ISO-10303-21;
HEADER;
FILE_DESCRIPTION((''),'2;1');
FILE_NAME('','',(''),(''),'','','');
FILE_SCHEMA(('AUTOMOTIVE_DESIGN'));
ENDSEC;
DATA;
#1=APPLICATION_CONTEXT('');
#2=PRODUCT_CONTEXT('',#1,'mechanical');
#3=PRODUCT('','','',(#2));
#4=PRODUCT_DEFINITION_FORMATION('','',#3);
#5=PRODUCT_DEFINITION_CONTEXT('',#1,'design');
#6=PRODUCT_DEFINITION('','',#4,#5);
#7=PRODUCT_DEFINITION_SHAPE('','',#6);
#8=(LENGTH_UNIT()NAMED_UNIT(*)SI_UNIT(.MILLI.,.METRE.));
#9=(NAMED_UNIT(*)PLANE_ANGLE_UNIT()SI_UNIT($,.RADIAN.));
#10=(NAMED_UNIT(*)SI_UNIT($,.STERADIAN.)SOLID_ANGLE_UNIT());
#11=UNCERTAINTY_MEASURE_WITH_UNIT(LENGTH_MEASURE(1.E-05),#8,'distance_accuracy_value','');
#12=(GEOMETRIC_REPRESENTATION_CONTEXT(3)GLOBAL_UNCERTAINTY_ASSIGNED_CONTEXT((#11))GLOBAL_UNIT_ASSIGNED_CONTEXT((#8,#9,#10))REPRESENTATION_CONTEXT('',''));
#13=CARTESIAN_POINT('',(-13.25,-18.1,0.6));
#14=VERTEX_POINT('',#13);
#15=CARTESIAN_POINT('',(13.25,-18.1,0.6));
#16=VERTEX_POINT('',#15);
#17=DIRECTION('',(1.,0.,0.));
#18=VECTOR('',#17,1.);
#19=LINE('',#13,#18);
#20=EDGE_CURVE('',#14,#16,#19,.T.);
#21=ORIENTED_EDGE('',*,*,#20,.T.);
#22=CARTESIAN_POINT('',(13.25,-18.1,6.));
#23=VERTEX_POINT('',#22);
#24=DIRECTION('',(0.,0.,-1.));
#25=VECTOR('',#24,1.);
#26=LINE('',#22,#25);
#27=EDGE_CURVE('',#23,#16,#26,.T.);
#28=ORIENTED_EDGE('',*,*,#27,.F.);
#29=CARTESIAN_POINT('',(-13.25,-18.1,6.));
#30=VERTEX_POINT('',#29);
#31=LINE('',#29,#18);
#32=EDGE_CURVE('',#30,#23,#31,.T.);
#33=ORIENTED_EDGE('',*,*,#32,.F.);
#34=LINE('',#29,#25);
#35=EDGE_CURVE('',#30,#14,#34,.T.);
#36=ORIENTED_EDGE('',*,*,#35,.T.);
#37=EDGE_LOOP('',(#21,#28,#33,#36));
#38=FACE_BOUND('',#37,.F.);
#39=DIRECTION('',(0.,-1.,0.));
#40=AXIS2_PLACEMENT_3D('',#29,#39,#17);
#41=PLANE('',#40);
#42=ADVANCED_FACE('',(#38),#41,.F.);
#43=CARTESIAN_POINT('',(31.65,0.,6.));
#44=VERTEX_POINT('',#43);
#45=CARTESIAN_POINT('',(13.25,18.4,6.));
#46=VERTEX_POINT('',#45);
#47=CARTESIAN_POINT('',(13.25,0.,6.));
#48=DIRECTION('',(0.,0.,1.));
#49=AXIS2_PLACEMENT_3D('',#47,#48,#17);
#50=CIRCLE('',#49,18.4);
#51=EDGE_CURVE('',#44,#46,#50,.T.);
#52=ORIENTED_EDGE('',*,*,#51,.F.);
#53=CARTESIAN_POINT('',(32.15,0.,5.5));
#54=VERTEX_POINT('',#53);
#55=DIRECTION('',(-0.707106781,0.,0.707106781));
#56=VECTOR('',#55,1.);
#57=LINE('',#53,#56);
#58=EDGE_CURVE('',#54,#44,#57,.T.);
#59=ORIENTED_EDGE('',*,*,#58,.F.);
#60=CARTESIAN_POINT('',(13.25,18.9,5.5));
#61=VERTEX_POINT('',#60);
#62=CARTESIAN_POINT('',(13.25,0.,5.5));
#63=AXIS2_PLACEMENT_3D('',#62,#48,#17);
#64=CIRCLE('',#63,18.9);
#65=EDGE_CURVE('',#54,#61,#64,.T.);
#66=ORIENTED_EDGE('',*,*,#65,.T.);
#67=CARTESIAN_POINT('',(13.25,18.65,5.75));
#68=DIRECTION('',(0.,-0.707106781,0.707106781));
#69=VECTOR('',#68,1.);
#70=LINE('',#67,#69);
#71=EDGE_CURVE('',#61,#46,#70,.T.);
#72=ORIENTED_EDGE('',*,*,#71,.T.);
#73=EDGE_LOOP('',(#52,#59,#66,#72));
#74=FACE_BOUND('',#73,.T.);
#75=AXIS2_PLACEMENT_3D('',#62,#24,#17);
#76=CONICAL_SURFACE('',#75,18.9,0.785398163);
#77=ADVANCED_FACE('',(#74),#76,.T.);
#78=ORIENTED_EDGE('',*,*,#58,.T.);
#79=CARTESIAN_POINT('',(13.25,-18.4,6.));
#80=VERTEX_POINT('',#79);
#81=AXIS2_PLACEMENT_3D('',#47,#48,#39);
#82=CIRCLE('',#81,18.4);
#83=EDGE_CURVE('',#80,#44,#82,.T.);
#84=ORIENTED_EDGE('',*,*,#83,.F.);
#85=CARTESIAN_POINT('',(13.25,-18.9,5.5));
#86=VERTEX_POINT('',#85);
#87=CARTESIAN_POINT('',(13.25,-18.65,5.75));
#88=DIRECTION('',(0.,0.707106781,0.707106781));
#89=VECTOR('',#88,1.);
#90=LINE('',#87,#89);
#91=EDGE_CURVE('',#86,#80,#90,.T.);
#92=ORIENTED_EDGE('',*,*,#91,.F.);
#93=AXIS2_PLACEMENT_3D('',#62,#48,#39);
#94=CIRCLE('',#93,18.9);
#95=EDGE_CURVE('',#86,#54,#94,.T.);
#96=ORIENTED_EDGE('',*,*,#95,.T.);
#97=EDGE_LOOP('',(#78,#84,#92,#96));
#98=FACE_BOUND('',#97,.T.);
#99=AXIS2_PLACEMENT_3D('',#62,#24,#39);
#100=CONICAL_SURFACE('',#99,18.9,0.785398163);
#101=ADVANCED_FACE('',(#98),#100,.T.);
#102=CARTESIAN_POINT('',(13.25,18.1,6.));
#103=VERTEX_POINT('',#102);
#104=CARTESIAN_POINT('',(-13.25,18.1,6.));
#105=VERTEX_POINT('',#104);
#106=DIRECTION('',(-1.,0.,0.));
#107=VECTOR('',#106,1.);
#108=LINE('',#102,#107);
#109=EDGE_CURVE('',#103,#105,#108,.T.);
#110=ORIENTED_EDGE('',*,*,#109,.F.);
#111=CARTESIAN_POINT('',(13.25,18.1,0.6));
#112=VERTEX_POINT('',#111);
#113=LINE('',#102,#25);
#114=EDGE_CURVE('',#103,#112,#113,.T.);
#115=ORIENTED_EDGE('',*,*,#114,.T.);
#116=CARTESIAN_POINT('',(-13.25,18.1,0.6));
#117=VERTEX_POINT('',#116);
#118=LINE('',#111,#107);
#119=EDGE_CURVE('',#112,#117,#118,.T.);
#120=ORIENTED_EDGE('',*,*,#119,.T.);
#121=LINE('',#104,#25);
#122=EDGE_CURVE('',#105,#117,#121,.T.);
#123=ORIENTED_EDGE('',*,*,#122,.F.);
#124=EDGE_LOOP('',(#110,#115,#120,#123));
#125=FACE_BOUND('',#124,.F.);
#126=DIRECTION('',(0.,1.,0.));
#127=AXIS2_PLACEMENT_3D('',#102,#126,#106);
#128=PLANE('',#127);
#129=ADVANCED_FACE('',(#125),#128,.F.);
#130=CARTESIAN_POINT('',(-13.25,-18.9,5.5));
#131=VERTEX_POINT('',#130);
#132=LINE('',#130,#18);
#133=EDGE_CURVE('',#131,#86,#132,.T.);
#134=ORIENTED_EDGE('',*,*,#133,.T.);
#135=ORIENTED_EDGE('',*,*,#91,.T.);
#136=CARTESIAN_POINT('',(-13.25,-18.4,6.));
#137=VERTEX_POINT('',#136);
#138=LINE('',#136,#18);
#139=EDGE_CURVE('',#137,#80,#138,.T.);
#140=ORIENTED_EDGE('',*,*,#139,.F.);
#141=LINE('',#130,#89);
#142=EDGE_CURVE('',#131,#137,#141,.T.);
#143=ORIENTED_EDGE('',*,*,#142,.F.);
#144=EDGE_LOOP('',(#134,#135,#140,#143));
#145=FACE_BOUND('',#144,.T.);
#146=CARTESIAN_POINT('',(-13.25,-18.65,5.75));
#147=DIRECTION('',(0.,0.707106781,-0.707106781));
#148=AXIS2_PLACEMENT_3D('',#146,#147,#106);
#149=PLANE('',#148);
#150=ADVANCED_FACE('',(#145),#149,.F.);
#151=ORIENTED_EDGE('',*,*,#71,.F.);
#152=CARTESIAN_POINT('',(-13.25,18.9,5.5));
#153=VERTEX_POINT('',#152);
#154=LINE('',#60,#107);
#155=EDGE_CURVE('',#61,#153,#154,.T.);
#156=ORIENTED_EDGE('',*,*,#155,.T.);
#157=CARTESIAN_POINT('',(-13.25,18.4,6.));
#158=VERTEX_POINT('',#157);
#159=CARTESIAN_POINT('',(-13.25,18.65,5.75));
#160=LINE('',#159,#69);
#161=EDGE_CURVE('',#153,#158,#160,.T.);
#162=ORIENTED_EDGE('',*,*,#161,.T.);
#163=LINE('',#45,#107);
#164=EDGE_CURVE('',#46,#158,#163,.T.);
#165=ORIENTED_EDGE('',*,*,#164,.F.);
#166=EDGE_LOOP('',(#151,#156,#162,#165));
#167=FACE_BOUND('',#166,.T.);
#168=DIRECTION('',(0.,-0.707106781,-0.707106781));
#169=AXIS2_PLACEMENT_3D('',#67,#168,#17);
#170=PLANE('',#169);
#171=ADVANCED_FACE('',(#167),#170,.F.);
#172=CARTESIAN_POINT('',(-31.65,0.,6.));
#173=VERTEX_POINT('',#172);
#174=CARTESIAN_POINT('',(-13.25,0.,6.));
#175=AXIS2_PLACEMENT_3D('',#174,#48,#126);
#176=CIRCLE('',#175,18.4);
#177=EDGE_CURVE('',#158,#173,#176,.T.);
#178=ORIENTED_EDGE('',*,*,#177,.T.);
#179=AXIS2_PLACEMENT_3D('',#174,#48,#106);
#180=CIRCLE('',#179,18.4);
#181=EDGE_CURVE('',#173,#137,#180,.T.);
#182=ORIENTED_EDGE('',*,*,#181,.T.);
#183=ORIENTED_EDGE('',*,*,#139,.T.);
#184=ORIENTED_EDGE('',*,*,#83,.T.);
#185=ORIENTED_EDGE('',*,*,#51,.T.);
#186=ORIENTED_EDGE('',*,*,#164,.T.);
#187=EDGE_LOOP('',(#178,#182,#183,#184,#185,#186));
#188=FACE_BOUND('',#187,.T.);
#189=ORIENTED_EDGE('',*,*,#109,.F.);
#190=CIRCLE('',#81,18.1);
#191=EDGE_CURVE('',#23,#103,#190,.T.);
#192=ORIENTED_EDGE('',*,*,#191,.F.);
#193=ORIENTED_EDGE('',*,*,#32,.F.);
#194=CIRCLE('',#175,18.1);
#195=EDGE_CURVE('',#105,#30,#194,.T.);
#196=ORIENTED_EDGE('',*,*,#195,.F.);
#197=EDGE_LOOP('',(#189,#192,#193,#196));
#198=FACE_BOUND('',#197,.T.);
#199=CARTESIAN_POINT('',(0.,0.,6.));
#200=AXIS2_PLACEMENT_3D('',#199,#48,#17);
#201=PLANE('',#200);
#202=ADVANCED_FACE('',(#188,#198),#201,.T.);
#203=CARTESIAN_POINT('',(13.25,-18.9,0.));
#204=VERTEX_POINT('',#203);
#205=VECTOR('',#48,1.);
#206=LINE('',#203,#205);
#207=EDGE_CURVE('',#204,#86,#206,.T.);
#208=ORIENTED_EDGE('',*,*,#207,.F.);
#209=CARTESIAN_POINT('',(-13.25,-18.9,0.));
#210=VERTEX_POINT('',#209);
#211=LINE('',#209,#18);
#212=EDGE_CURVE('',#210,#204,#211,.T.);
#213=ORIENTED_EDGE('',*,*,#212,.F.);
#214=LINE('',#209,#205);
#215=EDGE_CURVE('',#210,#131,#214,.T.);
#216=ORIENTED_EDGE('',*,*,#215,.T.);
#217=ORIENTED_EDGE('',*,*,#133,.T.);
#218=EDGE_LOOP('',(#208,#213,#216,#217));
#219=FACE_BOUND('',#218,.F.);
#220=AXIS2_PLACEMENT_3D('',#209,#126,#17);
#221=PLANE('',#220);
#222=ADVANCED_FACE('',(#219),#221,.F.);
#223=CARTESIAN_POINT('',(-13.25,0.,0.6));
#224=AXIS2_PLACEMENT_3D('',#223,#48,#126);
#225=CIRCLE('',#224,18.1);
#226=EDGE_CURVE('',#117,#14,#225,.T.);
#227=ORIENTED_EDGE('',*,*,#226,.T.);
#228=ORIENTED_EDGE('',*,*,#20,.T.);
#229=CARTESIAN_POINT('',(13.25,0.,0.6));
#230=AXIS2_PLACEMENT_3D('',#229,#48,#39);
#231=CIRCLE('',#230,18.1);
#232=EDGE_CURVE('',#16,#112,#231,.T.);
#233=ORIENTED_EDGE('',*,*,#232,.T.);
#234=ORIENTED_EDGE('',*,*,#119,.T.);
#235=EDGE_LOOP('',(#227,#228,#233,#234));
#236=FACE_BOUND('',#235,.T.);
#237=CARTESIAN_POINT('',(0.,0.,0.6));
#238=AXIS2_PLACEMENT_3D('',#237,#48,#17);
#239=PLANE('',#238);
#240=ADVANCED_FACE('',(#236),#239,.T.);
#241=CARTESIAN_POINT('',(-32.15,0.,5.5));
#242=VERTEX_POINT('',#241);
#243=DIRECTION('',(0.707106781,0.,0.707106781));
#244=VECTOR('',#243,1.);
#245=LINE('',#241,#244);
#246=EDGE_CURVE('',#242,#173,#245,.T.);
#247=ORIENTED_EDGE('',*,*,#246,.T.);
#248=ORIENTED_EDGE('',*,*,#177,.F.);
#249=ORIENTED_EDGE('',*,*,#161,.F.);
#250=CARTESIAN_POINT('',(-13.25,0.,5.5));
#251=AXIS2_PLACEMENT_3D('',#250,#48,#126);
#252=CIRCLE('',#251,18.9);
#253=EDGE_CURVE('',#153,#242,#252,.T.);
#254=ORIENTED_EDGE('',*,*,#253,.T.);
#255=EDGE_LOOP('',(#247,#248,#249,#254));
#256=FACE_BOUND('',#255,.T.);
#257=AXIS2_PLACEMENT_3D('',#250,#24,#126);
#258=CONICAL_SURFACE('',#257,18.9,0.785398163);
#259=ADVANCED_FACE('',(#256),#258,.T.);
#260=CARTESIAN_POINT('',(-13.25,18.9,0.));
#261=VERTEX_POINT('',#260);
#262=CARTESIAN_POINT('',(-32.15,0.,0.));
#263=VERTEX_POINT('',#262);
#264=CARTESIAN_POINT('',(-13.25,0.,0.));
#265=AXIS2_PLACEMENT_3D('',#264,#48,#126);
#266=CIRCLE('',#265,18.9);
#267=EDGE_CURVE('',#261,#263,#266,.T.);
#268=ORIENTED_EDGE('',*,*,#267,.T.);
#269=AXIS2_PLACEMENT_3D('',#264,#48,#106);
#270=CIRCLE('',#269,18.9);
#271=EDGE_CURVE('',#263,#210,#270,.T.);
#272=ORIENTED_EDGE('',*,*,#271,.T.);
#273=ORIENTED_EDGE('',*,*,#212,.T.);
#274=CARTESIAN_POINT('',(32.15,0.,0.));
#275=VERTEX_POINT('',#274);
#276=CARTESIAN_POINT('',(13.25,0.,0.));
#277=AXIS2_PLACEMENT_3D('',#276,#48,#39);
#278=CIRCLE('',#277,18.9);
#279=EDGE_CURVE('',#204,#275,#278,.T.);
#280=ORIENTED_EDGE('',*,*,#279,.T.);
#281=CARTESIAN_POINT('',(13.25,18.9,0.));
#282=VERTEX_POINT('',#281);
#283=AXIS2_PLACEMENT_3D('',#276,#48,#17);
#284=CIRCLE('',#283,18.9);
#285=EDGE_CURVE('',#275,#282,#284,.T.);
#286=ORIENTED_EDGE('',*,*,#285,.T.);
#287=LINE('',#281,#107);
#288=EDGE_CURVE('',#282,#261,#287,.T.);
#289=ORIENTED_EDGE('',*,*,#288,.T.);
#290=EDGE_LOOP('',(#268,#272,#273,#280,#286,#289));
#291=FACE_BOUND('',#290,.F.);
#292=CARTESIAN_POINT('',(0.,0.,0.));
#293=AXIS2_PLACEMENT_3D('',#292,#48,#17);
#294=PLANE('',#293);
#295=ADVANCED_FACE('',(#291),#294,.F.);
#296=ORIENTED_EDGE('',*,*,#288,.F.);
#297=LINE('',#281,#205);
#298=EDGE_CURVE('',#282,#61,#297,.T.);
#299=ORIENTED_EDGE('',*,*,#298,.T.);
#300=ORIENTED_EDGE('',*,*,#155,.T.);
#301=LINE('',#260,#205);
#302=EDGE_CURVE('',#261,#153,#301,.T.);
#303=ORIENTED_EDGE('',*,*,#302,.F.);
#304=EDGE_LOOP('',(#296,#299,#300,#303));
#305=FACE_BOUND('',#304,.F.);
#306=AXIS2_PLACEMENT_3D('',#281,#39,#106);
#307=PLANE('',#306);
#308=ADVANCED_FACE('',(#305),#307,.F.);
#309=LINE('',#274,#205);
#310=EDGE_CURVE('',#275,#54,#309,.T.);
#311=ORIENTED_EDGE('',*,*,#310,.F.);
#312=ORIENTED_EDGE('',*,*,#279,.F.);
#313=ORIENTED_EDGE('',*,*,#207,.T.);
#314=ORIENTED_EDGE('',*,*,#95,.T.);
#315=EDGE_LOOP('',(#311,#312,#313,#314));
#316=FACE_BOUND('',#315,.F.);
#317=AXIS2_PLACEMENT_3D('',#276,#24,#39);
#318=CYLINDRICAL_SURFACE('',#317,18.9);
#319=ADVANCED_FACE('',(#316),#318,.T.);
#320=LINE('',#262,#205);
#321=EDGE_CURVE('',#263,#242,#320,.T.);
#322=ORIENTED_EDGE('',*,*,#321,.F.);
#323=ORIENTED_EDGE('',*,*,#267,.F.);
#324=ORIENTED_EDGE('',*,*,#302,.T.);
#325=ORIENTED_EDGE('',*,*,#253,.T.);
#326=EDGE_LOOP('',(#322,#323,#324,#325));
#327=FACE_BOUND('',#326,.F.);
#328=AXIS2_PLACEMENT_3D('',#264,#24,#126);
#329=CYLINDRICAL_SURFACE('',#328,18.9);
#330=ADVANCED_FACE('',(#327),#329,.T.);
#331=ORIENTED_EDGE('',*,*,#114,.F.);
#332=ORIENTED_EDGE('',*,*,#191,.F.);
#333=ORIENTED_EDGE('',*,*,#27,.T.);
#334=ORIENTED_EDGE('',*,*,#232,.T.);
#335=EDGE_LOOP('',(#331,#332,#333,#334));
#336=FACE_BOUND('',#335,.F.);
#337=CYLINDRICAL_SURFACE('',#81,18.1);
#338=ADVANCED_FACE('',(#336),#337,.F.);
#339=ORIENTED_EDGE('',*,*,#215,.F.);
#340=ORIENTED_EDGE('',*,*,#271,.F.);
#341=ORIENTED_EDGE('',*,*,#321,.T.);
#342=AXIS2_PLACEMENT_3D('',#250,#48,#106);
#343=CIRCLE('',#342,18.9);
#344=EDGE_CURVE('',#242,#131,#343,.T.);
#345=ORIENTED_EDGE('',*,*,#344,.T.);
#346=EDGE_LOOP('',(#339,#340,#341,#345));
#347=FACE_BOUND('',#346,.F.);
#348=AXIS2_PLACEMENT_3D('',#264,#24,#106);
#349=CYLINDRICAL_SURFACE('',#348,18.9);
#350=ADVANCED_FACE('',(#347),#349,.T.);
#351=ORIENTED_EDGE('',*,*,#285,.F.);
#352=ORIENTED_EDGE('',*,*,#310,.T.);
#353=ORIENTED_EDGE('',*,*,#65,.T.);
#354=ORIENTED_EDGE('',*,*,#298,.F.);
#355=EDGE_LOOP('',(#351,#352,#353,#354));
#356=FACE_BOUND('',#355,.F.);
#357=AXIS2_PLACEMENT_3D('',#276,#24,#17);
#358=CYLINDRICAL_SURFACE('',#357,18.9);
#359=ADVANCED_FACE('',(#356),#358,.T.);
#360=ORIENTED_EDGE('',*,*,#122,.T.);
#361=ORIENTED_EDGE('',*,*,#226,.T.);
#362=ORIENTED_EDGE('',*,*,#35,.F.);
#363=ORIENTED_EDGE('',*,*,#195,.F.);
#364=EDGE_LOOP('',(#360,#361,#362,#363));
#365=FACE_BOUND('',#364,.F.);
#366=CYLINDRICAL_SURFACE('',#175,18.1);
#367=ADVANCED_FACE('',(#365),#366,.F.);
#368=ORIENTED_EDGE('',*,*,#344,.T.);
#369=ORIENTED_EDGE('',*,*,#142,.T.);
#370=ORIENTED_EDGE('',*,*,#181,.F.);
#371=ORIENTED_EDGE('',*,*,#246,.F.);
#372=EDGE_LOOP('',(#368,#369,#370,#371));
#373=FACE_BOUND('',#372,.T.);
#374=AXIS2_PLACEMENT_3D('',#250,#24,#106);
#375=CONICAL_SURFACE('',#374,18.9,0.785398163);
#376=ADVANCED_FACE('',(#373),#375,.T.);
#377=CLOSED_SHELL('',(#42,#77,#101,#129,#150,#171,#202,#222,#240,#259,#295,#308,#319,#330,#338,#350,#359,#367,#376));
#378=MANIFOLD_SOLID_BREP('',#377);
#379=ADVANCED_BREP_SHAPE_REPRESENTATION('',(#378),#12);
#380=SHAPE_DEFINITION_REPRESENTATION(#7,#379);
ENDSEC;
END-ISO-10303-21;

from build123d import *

# Parameters (mm, degrees)
F1_DEPTH = 6
F3_DEPTH = 5.4
F4_SIZE  = 0.5


with BuildPart() as f1:
    # F0 (on Top) → F1 (new body)
    with BuildSketch(Plane.XY):
        with BuildLine():
            Line((13.25, 18.9), (-13.25, 18.9))
            ThreePointArc((-13.25, 18.9), (-26.6143181644, 13.3643181644), (-32.15, 0))
            ThreePointArc((-32.15, 0), (-26.6143181644, -13.3643181644), (-13.25, -18.9))
            Line((-13.25, -18.9), (13.25, -18.9))
            ThreePointArc((13.25, -18.9), (26.6143181644, -13.3643181644), (32.15, 0))
            ThreePointArc((32.15, 0), (26.6143181644, 13.3643181644), (13.25, 18.9))
        make_face()
    extrude(amount=F1_DEPTH)

    # F2 (on face) → F3 (cut)
    with BuildSketch(Plane.XY.offset(6)):
        with BuildLine():
            Line((13.25, 18.1), (-13.25, 18.1))
            ThreePointArc((-13.25, 18.1), (-31.35, 0), (-13.25, -18.1))
            Line((-13.25, -18.1), (13.25, -18.1))
            ThreePointArc((13.25, -18.1), (31.35, 0), (13.25, 18.1))
        make_face()
    extrude(amount=-F3_DEPTH, mode=Mode.SUBTRACT)

    # F4
    f4_edges = [f1.edges().sort_by_distance(p)[0] for p in [
        (-32.15, 0, 6),
        (32.15, 0, 6),
        (0, 18.9, 6),
        (0, -18.9, 6),
    ]]
    chamfer(f4_edges, length=F4_SIZE)


solid = f1.part
